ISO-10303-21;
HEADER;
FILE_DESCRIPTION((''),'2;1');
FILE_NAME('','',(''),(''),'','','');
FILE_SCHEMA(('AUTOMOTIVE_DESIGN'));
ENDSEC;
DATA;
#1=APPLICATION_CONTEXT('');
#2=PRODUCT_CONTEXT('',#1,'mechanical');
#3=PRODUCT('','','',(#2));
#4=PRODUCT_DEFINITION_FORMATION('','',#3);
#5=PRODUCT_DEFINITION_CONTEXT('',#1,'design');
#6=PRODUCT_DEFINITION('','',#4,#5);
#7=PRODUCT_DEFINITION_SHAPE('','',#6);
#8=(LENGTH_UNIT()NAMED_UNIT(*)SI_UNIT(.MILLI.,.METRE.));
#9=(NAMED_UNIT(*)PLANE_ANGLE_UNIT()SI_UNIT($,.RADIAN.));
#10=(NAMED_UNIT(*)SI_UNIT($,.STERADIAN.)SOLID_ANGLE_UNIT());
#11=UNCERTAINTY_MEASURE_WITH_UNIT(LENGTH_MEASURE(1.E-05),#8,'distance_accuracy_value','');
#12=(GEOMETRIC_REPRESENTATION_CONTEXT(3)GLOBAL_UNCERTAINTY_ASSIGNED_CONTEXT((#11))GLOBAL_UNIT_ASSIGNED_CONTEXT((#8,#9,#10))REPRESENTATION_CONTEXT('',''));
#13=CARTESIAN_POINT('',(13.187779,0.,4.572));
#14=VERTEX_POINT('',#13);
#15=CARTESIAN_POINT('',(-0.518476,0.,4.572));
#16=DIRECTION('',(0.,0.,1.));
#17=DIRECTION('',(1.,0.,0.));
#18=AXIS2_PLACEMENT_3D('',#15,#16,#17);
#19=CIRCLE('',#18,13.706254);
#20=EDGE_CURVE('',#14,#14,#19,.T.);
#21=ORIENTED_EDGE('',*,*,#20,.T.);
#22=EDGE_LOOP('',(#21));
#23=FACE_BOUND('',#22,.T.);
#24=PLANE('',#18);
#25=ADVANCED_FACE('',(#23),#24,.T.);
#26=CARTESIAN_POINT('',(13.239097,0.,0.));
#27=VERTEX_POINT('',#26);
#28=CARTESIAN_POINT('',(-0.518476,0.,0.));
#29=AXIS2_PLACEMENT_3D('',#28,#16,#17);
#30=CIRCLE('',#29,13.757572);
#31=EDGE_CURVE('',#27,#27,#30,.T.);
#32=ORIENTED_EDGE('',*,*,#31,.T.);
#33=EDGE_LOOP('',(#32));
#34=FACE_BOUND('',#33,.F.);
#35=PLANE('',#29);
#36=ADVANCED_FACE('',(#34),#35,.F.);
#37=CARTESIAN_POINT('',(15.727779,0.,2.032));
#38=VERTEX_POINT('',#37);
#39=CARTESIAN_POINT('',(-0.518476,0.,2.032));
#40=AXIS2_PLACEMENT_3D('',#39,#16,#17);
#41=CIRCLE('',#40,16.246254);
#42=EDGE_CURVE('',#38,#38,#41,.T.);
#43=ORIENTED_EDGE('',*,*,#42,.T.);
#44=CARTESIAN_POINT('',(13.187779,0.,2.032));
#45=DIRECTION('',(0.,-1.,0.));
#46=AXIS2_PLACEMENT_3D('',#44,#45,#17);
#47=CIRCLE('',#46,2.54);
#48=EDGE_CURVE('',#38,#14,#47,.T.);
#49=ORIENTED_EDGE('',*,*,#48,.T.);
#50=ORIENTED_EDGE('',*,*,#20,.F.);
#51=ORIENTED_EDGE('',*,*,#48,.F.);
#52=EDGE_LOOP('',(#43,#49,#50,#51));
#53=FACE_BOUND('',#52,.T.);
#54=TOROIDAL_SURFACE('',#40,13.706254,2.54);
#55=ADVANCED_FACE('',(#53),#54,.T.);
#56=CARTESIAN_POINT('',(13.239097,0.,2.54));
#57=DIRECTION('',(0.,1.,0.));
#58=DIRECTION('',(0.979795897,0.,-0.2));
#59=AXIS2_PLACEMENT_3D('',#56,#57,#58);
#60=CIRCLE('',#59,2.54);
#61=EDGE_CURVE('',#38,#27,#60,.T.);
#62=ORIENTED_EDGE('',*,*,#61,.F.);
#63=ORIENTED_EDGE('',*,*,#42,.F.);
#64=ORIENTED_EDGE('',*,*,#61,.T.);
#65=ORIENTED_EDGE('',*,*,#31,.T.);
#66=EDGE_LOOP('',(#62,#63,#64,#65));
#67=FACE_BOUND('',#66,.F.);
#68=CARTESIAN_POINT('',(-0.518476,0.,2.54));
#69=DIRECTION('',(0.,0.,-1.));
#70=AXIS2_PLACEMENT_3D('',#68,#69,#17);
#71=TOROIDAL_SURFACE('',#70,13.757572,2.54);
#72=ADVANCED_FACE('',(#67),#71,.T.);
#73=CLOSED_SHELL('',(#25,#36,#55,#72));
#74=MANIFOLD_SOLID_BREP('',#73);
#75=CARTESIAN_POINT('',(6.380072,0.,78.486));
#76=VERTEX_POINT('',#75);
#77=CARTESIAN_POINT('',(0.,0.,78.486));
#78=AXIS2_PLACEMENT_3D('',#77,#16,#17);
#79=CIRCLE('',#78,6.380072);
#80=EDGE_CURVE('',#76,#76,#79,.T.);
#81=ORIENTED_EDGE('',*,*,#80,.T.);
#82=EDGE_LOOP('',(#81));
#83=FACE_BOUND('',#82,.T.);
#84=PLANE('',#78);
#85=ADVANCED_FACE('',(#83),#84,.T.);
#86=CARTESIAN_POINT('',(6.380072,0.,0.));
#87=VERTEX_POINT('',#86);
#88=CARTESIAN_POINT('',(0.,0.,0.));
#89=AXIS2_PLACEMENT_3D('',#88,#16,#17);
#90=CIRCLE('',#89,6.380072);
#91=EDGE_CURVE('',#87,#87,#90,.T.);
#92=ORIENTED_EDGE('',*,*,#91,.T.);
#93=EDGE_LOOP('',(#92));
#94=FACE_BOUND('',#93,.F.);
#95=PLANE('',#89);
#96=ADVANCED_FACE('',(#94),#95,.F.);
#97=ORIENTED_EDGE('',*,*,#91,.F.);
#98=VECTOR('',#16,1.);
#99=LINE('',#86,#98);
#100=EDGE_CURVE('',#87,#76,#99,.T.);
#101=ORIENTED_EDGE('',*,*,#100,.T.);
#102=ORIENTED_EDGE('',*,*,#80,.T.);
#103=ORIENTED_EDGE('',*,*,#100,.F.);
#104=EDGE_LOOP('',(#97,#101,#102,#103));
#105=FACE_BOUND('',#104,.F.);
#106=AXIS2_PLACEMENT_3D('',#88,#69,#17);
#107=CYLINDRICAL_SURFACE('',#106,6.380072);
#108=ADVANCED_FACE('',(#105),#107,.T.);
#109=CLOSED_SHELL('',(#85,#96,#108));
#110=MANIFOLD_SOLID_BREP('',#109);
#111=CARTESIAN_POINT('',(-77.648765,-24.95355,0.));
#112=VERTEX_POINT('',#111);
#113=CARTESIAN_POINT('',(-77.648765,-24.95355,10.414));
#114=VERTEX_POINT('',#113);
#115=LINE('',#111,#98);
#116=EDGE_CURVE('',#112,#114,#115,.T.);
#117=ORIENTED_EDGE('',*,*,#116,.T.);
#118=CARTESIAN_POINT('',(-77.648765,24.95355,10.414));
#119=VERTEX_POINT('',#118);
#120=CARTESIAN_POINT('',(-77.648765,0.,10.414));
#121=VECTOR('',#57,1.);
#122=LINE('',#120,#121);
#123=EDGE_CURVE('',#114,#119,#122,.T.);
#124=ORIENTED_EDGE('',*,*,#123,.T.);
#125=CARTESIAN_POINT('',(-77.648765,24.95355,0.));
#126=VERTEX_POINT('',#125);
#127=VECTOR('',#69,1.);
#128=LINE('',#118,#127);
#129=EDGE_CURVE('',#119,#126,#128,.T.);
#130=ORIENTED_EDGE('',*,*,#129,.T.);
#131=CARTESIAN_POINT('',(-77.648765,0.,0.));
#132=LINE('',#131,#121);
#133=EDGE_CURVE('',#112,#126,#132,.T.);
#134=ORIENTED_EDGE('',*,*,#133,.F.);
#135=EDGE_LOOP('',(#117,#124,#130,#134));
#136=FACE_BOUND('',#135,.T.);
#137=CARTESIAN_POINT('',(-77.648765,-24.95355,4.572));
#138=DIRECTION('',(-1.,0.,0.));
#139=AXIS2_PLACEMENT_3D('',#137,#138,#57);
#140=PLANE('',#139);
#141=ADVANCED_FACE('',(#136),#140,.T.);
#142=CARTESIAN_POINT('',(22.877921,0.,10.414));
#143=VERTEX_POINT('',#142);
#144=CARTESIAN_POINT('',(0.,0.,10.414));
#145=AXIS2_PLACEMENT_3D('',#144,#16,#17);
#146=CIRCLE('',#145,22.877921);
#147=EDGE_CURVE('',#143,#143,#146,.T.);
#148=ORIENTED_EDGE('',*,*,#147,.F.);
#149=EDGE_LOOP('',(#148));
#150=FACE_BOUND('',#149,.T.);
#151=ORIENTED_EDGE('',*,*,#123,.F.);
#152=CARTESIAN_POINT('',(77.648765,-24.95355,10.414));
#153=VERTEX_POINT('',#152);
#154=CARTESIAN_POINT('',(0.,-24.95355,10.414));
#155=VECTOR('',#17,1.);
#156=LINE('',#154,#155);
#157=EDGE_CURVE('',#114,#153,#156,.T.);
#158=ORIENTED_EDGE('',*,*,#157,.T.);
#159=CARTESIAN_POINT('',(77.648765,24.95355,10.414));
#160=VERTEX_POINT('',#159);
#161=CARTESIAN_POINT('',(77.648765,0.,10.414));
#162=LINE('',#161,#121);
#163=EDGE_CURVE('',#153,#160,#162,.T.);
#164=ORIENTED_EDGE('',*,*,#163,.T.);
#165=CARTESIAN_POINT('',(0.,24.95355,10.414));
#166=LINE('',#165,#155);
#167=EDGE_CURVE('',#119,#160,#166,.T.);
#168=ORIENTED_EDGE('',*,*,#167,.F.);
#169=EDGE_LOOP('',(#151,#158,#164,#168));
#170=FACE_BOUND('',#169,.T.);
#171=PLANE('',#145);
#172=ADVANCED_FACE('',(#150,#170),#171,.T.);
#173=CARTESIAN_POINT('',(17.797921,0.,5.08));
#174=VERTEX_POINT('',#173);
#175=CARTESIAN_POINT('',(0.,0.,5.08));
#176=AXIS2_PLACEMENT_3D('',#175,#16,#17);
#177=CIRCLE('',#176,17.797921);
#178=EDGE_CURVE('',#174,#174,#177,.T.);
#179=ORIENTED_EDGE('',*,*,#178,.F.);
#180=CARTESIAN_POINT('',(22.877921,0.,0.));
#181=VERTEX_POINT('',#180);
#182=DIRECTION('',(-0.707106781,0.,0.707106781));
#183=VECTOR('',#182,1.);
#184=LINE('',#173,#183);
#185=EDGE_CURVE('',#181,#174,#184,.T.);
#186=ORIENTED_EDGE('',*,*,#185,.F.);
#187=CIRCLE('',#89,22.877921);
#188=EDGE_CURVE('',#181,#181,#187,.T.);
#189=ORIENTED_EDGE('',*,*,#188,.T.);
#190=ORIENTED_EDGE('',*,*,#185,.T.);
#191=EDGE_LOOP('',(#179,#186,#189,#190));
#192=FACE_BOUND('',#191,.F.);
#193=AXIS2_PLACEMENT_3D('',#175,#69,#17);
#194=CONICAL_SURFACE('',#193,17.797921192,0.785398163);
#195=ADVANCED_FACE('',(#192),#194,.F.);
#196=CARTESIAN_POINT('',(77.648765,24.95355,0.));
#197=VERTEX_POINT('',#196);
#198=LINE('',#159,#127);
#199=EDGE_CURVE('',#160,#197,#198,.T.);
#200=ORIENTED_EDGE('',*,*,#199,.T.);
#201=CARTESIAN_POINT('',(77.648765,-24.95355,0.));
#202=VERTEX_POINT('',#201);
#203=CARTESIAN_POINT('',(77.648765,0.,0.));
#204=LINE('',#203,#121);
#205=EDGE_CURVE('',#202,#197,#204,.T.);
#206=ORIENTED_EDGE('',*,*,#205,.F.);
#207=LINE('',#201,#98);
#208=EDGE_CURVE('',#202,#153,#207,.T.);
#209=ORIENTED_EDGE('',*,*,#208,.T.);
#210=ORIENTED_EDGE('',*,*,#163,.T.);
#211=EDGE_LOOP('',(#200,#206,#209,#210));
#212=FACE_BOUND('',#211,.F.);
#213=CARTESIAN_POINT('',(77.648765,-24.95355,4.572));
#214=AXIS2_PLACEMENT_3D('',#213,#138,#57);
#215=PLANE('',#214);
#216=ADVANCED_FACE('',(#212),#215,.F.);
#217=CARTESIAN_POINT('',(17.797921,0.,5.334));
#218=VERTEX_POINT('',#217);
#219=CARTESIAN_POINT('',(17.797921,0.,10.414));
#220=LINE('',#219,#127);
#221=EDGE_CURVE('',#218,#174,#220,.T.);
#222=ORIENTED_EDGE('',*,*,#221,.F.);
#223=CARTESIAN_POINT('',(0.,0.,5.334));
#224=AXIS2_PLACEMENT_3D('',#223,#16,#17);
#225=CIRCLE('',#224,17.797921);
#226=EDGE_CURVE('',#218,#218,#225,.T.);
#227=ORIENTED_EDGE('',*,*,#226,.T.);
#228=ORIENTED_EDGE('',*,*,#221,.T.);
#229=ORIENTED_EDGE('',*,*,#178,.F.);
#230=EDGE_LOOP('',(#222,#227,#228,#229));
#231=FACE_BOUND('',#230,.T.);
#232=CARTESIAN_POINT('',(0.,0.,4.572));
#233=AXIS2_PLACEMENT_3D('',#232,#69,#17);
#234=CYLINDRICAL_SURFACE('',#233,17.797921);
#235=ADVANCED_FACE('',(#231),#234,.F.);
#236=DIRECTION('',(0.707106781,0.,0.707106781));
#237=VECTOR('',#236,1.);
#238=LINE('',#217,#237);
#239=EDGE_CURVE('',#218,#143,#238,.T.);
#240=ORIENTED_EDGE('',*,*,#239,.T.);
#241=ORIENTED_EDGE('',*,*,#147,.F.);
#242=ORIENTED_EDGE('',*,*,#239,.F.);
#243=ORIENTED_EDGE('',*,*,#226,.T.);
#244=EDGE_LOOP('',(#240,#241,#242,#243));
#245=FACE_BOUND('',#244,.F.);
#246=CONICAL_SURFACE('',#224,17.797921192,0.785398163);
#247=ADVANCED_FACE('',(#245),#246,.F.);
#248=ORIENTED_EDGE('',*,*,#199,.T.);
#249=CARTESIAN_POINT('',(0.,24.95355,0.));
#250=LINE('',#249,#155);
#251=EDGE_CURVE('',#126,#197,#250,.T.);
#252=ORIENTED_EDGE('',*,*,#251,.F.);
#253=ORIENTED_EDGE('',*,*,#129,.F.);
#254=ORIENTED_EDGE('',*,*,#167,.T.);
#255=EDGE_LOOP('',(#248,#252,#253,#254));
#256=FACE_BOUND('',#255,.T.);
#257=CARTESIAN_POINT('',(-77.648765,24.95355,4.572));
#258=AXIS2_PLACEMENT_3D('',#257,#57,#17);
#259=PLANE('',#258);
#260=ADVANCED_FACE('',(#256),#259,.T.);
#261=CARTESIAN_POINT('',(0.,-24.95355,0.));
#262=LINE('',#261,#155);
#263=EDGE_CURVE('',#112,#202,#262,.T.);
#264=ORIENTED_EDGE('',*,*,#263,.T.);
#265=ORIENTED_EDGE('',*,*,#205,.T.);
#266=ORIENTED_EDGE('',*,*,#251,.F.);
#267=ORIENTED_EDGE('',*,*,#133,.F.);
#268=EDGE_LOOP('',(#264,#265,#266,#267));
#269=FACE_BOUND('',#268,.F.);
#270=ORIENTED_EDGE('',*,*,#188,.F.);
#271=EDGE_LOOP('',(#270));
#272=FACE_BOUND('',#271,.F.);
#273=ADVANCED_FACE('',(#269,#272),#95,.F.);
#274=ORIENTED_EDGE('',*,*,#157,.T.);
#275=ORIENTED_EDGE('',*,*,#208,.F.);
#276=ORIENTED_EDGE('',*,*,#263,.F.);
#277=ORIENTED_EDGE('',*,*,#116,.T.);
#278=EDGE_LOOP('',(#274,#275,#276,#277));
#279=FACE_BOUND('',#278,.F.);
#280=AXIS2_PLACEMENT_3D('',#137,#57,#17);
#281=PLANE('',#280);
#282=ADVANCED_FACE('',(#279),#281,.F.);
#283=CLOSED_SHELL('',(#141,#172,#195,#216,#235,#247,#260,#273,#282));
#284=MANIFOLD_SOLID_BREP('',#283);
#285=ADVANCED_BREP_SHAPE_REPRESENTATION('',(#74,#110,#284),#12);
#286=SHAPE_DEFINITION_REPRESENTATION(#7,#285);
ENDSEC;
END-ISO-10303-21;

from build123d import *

# Parameters (mm, degrees)
F0_W     = 155.297530815
F0_H     = 49.9070994556
F0_R     = 17.7979211921
F1_DEPTH = 4.572
F2_W     = 155.297530815
F2_H     = 49.9070994556
F2_R     = 17.7979211921
F3_DEPTH = 5.842
F4_R     = 16.2462540438
F5_DEPTH = 4.572
F6_R     = 2.54
F8_R     = 6.3800715249
F9_DEPTH = 78.486
F10_SIZE = 5.08
F11_SIZE = 5.08


# Not quite as in the source:
# - a fillet or chamfer that OpenCascade refuses, or shapes differently, is made with other operations: its cross-section is extruded or revolved along the edge and cut away or added


with BuildPart() as f1:
    # F0 (on Top) → F1 (new body)
    with BuildSketch(Plane.XY):
        Rectangle(F0_W, F0_H)
        Circle(F0_R, mode=Mode.SUBTRACT)
    extrude(amount=F1_DEPTH)

    # F2 (on face) → F3 (join)
    with BuildSketch(Plane.XY.offset(4.572)):
        Rectangle(F2_W, F2_H)
        Circle(F2_R, mode=Mode.SUBTRACT)
    extrude(amount=F3_DEPTH)

    # F10
    f10_edges = [f1.edges().sort_by_distance(p)[0] for p in [
        (-17.797921, 0, 0),
    ]]
    chamfer(f10_edges, length=F10_SIZE)

    # F11
    f11_edges = [f1.edges().sort_by_distance(p)[0] for p in [
        (-17.797921, 0, 10.414),
    ]]
    chamfer(f11_edges, length=F11_SIZE)


with BuildPart() as f5:
    # F4 (on Top) → F5 (new body)
    with BuildSketch(Plane.XY):
        with Locations((-0.5184755428, 0)):
            Circle(F4_R)
    extrude(amount=F5_DEPTH)

    # F6
    f6_edges = [f5.edges().sort_by_distance(p)[0] for p in [
        (-16.76473, 0, 4.572),
    ]]
    fillet(f6_edges, radius=F6_R)

    # F7: fillet of radius 2.54 on 1 edges, made by hand

    # F7_s1 → F7_t2 (revolve, cut)
    with BuildSketch(Plane.XZ):
        with BuildLine():
            ThreePointArc((15.7277785011, 2.032), (14.8455339738, 0.5725244601), (13.2390969224, 0))
            Line((13.2390969224, 0), (15.7277785011, 0))
            Line((15.7277785011, 0), (15.7277785011, 2.032))
        make_face()
    revolve(axis=Axis((-0.5184755428, 0, 0), (0, 0, 1)), mode=Mode.SUBTRACT)


with BuildPart() as f9:
    # F8 (on Top) → F9 (new body)
    with BuildSketch(Plane.XY):
        Circle(F8_R)
    extrude(amount=F9_DEPTH)


solid = Compound([f1.part, f5.part, f9.part])
